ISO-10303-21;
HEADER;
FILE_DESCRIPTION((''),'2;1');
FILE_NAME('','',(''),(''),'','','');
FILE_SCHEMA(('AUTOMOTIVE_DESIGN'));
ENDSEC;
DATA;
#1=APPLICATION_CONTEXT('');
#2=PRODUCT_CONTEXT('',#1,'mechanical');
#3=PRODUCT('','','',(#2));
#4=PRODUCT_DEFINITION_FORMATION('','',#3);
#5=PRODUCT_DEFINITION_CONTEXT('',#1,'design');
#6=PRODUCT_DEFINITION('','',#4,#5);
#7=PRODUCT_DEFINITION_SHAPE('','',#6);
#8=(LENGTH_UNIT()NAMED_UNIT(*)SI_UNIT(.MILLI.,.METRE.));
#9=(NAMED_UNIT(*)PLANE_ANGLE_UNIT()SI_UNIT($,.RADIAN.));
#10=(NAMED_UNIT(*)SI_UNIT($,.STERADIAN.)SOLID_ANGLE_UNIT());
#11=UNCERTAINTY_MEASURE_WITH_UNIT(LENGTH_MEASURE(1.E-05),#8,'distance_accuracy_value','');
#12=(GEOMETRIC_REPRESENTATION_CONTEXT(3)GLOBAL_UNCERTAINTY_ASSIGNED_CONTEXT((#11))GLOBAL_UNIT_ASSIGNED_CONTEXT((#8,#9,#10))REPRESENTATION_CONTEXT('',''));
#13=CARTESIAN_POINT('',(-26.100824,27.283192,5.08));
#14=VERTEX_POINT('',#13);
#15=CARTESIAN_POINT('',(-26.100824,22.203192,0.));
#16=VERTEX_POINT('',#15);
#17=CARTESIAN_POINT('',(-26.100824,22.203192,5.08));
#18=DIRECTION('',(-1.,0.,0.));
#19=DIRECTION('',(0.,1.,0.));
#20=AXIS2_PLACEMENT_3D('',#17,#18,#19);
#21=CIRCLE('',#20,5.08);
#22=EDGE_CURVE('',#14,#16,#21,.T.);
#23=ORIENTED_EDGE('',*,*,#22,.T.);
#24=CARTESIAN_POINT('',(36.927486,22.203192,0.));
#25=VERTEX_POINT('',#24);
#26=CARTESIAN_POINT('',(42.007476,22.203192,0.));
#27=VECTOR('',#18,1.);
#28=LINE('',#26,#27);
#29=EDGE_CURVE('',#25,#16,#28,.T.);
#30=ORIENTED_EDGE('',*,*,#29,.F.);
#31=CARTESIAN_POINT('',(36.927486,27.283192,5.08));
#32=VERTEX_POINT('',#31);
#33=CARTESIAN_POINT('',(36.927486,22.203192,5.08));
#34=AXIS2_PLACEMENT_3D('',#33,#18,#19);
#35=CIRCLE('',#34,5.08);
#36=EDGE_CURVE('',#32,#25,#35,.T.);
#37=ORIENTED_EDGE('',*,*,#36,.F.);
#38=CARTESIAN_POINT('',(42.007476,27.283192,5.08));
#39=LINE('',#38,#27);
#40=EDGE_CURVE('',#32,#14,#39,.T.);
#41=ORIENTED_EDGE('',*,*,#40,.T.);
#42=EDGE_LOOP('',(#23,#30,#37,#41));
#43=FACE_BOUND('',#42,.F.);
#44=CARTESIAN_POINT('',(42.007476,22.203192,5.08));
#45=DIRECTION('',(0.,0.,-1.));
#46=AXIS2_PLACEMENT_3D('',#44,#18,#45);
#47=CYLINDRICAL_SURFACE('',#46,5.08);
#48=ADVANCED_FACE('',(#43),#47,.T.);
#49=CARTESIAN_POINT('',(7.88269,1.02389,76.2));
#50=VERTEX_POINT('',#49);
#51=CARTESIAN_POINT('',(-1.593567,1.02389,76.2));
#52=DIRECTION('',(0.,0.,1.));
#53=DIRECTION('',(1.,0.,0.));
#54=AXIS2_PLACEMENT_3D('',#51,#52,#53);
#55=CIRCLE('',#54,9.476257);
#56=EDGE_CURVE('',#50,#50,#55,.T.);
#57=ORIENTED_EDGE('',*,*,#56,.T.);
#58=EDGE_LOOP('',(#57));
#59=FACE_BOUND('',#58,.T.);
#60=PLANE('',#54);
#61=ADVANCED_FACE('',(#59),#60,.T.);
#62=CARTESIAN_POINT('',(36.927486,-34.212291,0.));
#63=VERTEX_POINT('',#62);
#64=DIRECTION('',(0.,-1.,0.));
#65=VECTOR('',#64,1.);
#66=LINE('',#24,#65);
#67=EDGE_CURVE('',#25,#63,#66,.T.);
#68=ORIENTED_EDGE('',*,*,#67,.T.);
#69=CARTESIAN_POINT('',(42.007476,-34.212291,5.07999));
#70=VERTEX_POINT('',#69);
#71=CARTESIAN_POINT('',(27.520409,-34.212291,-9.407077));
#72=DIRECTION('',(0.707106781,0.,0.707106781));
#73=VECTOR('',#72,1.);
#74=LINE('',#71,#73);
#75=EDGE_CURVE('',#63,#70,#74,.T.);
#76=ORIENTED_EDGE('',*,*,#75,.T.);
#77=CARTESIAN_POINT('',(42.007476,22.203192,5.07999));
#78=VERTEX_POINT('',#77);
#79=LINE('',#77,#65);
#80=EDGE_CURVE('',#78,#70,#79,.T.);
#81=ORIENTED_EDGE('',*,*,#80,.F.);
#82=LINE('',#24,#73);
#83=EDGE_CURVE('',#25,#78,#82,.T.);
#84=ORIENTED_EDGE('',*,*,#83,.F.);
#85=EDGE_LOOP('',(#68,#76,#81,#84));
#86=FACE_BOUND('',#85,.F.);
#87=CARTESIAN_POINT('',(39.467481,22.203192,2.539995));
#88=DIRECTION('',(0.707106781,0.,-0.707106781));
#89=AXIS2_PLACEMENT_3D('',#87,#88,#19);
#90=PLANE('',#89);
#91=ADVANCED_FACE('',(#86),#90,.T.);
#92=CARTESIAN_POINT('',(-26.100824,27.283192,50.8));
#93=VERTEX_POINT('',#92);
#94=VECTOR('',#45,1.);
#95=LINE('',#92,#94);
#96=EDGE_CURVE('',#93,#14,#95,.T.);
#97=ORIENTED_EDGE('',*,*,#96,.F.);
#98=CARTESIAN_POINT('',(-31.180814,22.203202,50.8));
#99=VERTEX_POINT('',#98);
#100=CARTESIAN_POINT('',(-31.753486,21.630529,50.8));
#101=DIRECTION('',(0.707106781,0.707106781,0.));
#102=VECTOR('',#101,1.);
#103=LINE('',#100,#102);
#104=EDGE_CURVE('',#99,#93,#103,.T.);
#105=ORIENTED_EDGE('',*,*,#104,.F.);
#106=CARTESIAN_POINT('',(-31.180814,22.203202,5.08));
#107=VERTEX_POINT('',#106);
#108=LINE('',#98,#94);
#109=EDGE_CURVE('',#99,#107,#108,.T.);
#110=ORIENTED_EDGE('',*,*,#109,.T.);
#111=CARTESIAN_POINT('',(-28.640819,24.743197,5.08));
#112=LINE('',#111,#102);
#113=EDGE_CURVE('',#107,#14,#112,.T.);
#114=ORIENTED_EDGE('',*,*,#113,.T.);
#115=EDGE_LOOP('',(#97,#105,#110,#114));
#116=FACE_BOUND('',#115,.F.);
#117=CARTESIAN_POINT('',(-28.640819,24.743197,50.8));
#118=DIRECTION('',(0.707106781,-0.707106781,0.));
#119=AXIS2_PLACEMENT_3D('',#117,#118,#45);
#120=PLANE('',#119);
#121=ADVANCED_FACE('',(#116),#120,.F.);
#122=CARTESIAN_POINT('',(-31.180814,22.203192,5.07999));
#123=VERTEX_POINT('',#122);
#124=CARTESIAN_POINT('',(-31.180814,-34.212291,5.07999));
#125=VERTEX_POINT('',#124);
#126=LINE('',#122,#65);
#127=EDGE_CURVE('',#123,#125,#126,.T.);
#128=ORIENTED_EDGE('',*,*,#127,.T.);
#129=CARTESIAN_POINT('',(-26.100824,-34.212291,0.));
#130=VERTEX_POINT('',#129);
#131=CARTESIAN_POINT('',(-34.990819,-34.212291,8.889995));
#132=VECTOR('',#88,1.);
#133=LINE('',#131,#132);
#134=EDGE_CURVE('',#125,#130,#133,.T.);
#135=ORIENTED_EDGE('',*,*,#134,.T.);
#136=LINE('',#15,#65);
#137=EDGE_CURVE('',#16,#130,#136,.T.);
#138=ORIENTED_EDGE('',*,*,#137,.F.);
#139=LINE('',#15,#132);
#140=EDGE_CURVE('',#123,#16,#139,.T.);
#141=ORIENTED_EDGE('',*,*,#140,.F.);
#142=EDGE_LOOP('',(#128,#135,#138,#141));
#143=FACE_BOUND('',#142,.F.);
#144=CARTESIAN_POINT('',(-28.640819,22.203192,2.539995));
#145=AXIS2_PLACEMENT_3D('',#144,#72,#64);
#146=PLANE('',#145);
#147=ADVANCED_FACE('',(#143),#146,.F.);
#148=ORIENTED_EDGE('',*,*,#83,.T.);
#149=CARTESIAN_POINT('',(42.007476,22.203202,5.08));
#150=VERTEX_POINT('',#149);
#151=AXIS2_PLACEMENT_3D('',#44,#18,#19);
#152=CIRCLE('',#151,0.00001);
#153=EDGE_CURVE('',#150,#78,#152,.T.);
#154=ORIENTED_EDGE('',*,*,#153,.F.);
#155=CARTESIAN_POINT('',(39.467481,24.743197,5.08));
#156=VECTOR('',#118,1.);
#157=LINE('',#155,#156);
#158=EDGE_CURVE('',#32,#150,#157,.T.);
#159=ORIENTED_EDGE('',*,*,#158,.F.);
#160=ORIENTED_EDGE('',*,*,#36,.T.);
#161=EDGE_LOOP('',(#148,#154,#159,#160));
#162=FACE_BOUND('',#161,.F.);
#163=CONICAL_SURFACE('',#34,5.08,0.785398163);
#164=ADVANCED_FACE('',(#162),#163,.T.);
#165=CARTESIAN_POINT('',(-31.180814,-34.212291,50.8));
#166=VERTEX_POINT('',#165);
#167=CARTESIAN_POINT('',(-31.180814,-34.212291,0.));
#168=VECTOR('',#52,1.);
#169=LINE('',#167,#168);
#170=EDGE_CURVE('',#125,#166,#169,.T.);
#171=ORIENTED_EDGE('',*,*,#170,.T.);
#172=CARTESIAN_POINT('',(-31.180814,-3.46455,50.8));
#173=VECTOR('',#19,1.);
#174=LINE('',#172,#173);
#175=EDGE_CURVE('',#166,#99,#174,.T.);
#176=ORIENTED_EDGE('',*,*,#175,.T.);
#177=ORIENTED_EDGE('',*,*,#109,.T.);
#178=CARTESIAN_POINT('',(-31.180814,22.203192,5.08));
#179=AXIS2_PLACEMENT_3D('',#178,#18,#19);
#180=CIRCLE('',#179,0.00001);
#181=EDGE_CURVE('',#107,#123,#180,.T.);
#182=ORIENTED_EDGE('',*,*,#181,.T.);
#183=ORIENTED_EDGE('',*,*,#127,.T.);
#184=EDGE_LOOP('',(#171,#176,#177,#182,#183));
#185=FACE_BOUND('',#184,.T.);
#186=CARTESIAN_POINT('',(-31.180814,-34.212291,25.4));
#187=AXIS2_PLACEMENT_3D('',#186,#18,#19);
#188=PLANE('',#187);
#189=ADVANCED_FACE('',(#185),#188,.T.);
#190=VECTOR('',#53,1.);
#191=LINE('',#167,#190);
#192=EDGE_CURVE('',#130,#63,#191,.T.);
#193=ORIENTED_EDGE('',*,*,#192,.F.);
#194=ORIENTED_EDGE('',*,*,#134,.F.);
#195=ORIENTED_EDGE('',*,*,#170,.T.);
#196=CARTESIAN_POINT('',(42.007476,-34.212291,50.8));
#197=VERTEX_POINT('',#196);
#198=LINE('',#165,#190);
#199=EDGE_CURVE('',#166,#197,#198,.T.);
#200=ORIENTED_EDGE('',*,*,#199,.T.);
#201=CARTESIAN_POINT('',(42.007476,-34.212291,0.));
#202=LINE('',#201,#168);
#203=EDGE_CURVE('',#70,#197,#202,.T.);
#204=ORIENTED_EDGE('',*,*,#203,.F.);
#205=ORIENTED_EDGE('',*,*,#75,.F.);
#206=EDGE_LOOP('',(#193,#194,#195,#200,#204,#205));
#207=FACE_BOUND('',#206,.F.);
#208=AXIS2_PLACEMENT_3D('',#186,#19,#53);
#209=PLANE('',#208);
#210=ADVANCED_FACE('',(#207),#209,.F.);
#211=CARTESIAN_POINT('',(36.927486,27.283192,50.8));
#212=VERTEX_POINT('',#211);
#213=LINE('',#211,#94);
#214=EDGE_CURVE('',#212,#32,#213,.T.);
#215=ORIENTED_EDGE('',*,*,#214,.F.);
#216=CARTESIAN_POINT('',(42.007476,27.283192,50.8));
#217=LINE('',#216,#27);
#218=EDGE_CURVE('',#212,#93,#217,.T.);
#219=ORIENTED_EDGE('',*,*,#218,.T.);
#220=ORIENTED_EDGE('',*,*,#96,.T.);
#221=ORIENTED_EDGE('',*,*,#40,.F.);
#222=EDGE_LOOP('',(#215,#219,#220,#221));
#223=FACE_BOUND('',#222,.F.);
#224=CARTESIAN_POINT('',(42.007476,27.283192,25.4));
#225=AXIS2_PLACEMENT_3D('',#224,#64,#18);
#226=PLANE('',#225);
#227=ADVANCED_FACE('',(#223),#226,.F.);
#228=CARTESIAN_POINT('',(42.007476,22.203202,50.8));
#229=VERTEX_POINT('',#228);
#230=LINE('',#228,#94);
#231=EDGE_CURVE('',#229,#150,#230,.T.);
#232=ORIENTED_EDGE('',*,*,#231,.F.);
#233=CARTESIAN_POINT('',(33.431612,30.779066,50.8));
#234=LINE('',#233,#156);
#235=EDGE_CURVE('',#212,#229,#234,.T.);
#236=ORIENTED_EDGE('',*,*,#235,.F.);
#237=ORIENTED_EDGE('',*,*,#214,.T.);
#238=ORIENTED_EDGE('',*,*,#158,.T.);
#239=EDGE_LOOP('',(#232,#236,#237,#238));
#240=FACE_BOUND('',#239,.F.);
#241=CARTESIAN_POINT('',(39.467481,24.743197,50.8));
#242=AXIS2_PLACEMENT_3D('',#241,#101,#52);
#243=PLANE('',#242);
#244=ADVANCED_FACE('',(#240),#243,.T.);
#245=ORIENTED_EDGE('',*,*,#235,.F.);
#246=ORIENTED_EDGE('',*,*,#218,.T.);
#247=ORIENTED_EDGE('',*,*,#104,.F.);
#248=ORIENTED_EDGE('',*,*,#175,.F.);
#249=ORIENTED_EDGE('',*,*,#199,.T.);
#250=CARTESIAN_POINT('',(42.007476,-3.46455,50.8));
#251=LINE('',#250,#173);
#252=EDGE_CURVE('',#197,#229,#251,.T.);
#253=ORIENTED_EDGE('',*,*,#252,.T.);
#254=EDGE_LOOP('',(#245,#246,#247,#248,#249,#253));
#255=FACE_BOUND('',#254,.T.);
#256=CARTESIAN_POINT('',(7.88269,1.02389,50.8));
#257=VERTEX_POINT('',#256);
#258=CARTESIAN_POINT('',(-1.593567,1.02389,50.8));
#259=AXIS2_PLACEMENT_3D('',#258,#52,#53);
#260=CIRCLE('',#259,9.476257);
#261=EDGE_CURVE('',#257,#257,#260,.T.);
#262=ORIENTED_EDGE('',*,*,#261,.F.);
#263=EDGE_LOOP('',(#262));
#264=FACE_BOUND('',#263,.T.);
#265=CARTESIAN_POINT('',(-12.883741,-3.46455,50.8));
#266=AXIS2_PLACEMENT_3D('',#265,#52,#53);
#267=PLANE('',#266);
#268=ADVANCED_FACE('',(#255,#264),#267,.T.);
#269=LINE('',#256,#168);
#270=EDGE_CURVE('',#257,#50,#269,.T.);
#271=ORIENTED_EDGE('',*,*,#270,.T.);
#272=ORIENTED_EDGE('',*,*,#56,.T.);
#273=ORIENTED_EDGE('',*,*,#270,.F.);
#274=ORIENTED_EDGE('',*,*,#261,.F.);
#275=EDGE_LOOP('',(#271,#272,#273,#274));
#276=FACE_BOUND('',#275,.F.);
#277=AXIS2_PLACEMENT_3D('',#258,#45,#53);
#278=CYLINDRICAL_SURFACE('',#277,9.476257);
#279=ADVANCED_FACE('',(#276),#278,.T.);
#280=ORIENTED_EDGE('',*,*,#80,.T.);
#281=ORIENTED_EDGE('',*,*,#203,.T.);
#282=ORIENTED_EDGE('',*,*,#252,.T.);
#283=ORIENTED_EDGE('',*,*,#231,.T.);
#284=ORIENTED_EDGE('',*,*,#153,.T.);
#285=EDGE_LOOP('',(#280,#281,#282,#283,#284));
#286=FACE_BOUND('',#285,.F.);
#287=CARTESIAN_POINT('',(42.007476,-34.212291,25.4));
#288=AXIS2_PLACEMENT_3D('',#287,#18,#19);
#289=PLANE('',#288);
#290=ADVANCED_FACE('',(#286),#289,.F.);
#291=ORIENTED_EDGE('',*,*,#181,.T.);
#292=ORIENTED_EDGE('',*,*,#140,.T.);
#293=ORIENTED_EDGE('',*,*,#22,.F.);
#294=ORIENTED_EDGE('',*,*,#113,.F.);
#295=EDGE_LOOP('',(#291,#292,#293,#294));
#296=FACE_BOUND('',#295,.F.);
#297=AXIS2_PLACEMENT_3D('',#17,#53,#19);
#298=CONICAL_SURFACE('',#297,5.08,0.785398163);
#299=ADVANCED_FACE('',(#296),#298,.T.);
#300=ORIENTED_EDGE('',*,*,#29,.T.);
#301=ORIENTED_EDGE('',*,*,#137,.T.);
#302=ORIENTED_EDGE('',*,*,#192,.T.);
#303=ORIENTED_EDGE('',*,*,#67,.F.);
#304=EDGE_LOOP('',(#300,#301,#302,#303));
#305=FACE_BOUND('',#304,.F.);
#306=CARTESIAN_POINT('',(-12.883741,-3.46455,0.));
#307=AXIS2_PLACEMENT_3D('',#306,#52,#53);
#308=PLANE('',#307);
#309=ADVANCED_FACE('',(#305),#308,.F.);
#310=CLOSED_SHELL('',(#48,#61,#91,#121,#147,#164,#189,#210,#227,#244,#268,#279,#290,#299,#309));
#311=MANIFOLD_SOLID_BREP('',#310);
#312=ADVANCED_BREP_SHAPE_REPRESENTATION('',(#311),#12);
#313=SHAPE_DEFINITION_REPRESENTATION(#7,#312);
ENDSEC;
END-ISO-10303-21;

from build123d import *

# Parameters (mm, degrees)
F0_W     = 36.594145
F0_H     = 61.4954829216
F1_DEPTH = 25.4
F2_DEPTH = 25.4
F3_R     = 5.08
F4_SIZE  = 5.07999
F5_R     = 9.4762574088
F6_DEPTH = 25.4


# Not quite as in the source:
# - a fillet or chamfer is up to 0.001 mm smaller than in the source, because OpenCascade refuses the exact size


with BuildPart() as f1:
    # F0 (on Top) → F1 (new body)
    with BuildSketch(Plane.XY):
        with Locations((-12.8837414086, -3.4645497799)):
            Rectangle(F0_W, F0_H)
        with Locations((23.7104035914, -3.4645497799)):
            Rectangle(F0_W, F0_H)
    extrude(amount=F1_DEPTH)

    # F2 (add): a face of the model
    f2_faces = [f1.faces().sort_by_distance(p)[0] for p in [
        (5.4133310914, -3.4645497799, 25.4),
    ]]
    extrude(f2_faces, amount=F2_DEPTH)

    # F3
    f3_edges = [f1.edges().sort_by_distance(p)[0] for p in [
        (5.413331, 27.283192, 0),
    ]]
    fillet(f3_edges, radius=F3_R)

    # F4 (size 5.08 in the source; OpenCascade refuses exactly that, so slightly less here)
    f4_edges = [f1.edges().sort_by_distance(p)[0] for p in [
        (-31.180814, 27.283192, 27.94),
        (42.007476, 27.283192, 27.94),
        (42.007476, -6.00455, 0),
    ]]
    chamfer(f4_edges, length=F4_SIZE)

    # F5 (on face) → F6 (join)
    with BuildSketch(Plane.XY.offset(50.8)):
        with Locations((-1.593567431, 1.0238895973)):
            Circle(F5_R)
    extrude(amount=F6_DEPTH)


solid = f1.part
